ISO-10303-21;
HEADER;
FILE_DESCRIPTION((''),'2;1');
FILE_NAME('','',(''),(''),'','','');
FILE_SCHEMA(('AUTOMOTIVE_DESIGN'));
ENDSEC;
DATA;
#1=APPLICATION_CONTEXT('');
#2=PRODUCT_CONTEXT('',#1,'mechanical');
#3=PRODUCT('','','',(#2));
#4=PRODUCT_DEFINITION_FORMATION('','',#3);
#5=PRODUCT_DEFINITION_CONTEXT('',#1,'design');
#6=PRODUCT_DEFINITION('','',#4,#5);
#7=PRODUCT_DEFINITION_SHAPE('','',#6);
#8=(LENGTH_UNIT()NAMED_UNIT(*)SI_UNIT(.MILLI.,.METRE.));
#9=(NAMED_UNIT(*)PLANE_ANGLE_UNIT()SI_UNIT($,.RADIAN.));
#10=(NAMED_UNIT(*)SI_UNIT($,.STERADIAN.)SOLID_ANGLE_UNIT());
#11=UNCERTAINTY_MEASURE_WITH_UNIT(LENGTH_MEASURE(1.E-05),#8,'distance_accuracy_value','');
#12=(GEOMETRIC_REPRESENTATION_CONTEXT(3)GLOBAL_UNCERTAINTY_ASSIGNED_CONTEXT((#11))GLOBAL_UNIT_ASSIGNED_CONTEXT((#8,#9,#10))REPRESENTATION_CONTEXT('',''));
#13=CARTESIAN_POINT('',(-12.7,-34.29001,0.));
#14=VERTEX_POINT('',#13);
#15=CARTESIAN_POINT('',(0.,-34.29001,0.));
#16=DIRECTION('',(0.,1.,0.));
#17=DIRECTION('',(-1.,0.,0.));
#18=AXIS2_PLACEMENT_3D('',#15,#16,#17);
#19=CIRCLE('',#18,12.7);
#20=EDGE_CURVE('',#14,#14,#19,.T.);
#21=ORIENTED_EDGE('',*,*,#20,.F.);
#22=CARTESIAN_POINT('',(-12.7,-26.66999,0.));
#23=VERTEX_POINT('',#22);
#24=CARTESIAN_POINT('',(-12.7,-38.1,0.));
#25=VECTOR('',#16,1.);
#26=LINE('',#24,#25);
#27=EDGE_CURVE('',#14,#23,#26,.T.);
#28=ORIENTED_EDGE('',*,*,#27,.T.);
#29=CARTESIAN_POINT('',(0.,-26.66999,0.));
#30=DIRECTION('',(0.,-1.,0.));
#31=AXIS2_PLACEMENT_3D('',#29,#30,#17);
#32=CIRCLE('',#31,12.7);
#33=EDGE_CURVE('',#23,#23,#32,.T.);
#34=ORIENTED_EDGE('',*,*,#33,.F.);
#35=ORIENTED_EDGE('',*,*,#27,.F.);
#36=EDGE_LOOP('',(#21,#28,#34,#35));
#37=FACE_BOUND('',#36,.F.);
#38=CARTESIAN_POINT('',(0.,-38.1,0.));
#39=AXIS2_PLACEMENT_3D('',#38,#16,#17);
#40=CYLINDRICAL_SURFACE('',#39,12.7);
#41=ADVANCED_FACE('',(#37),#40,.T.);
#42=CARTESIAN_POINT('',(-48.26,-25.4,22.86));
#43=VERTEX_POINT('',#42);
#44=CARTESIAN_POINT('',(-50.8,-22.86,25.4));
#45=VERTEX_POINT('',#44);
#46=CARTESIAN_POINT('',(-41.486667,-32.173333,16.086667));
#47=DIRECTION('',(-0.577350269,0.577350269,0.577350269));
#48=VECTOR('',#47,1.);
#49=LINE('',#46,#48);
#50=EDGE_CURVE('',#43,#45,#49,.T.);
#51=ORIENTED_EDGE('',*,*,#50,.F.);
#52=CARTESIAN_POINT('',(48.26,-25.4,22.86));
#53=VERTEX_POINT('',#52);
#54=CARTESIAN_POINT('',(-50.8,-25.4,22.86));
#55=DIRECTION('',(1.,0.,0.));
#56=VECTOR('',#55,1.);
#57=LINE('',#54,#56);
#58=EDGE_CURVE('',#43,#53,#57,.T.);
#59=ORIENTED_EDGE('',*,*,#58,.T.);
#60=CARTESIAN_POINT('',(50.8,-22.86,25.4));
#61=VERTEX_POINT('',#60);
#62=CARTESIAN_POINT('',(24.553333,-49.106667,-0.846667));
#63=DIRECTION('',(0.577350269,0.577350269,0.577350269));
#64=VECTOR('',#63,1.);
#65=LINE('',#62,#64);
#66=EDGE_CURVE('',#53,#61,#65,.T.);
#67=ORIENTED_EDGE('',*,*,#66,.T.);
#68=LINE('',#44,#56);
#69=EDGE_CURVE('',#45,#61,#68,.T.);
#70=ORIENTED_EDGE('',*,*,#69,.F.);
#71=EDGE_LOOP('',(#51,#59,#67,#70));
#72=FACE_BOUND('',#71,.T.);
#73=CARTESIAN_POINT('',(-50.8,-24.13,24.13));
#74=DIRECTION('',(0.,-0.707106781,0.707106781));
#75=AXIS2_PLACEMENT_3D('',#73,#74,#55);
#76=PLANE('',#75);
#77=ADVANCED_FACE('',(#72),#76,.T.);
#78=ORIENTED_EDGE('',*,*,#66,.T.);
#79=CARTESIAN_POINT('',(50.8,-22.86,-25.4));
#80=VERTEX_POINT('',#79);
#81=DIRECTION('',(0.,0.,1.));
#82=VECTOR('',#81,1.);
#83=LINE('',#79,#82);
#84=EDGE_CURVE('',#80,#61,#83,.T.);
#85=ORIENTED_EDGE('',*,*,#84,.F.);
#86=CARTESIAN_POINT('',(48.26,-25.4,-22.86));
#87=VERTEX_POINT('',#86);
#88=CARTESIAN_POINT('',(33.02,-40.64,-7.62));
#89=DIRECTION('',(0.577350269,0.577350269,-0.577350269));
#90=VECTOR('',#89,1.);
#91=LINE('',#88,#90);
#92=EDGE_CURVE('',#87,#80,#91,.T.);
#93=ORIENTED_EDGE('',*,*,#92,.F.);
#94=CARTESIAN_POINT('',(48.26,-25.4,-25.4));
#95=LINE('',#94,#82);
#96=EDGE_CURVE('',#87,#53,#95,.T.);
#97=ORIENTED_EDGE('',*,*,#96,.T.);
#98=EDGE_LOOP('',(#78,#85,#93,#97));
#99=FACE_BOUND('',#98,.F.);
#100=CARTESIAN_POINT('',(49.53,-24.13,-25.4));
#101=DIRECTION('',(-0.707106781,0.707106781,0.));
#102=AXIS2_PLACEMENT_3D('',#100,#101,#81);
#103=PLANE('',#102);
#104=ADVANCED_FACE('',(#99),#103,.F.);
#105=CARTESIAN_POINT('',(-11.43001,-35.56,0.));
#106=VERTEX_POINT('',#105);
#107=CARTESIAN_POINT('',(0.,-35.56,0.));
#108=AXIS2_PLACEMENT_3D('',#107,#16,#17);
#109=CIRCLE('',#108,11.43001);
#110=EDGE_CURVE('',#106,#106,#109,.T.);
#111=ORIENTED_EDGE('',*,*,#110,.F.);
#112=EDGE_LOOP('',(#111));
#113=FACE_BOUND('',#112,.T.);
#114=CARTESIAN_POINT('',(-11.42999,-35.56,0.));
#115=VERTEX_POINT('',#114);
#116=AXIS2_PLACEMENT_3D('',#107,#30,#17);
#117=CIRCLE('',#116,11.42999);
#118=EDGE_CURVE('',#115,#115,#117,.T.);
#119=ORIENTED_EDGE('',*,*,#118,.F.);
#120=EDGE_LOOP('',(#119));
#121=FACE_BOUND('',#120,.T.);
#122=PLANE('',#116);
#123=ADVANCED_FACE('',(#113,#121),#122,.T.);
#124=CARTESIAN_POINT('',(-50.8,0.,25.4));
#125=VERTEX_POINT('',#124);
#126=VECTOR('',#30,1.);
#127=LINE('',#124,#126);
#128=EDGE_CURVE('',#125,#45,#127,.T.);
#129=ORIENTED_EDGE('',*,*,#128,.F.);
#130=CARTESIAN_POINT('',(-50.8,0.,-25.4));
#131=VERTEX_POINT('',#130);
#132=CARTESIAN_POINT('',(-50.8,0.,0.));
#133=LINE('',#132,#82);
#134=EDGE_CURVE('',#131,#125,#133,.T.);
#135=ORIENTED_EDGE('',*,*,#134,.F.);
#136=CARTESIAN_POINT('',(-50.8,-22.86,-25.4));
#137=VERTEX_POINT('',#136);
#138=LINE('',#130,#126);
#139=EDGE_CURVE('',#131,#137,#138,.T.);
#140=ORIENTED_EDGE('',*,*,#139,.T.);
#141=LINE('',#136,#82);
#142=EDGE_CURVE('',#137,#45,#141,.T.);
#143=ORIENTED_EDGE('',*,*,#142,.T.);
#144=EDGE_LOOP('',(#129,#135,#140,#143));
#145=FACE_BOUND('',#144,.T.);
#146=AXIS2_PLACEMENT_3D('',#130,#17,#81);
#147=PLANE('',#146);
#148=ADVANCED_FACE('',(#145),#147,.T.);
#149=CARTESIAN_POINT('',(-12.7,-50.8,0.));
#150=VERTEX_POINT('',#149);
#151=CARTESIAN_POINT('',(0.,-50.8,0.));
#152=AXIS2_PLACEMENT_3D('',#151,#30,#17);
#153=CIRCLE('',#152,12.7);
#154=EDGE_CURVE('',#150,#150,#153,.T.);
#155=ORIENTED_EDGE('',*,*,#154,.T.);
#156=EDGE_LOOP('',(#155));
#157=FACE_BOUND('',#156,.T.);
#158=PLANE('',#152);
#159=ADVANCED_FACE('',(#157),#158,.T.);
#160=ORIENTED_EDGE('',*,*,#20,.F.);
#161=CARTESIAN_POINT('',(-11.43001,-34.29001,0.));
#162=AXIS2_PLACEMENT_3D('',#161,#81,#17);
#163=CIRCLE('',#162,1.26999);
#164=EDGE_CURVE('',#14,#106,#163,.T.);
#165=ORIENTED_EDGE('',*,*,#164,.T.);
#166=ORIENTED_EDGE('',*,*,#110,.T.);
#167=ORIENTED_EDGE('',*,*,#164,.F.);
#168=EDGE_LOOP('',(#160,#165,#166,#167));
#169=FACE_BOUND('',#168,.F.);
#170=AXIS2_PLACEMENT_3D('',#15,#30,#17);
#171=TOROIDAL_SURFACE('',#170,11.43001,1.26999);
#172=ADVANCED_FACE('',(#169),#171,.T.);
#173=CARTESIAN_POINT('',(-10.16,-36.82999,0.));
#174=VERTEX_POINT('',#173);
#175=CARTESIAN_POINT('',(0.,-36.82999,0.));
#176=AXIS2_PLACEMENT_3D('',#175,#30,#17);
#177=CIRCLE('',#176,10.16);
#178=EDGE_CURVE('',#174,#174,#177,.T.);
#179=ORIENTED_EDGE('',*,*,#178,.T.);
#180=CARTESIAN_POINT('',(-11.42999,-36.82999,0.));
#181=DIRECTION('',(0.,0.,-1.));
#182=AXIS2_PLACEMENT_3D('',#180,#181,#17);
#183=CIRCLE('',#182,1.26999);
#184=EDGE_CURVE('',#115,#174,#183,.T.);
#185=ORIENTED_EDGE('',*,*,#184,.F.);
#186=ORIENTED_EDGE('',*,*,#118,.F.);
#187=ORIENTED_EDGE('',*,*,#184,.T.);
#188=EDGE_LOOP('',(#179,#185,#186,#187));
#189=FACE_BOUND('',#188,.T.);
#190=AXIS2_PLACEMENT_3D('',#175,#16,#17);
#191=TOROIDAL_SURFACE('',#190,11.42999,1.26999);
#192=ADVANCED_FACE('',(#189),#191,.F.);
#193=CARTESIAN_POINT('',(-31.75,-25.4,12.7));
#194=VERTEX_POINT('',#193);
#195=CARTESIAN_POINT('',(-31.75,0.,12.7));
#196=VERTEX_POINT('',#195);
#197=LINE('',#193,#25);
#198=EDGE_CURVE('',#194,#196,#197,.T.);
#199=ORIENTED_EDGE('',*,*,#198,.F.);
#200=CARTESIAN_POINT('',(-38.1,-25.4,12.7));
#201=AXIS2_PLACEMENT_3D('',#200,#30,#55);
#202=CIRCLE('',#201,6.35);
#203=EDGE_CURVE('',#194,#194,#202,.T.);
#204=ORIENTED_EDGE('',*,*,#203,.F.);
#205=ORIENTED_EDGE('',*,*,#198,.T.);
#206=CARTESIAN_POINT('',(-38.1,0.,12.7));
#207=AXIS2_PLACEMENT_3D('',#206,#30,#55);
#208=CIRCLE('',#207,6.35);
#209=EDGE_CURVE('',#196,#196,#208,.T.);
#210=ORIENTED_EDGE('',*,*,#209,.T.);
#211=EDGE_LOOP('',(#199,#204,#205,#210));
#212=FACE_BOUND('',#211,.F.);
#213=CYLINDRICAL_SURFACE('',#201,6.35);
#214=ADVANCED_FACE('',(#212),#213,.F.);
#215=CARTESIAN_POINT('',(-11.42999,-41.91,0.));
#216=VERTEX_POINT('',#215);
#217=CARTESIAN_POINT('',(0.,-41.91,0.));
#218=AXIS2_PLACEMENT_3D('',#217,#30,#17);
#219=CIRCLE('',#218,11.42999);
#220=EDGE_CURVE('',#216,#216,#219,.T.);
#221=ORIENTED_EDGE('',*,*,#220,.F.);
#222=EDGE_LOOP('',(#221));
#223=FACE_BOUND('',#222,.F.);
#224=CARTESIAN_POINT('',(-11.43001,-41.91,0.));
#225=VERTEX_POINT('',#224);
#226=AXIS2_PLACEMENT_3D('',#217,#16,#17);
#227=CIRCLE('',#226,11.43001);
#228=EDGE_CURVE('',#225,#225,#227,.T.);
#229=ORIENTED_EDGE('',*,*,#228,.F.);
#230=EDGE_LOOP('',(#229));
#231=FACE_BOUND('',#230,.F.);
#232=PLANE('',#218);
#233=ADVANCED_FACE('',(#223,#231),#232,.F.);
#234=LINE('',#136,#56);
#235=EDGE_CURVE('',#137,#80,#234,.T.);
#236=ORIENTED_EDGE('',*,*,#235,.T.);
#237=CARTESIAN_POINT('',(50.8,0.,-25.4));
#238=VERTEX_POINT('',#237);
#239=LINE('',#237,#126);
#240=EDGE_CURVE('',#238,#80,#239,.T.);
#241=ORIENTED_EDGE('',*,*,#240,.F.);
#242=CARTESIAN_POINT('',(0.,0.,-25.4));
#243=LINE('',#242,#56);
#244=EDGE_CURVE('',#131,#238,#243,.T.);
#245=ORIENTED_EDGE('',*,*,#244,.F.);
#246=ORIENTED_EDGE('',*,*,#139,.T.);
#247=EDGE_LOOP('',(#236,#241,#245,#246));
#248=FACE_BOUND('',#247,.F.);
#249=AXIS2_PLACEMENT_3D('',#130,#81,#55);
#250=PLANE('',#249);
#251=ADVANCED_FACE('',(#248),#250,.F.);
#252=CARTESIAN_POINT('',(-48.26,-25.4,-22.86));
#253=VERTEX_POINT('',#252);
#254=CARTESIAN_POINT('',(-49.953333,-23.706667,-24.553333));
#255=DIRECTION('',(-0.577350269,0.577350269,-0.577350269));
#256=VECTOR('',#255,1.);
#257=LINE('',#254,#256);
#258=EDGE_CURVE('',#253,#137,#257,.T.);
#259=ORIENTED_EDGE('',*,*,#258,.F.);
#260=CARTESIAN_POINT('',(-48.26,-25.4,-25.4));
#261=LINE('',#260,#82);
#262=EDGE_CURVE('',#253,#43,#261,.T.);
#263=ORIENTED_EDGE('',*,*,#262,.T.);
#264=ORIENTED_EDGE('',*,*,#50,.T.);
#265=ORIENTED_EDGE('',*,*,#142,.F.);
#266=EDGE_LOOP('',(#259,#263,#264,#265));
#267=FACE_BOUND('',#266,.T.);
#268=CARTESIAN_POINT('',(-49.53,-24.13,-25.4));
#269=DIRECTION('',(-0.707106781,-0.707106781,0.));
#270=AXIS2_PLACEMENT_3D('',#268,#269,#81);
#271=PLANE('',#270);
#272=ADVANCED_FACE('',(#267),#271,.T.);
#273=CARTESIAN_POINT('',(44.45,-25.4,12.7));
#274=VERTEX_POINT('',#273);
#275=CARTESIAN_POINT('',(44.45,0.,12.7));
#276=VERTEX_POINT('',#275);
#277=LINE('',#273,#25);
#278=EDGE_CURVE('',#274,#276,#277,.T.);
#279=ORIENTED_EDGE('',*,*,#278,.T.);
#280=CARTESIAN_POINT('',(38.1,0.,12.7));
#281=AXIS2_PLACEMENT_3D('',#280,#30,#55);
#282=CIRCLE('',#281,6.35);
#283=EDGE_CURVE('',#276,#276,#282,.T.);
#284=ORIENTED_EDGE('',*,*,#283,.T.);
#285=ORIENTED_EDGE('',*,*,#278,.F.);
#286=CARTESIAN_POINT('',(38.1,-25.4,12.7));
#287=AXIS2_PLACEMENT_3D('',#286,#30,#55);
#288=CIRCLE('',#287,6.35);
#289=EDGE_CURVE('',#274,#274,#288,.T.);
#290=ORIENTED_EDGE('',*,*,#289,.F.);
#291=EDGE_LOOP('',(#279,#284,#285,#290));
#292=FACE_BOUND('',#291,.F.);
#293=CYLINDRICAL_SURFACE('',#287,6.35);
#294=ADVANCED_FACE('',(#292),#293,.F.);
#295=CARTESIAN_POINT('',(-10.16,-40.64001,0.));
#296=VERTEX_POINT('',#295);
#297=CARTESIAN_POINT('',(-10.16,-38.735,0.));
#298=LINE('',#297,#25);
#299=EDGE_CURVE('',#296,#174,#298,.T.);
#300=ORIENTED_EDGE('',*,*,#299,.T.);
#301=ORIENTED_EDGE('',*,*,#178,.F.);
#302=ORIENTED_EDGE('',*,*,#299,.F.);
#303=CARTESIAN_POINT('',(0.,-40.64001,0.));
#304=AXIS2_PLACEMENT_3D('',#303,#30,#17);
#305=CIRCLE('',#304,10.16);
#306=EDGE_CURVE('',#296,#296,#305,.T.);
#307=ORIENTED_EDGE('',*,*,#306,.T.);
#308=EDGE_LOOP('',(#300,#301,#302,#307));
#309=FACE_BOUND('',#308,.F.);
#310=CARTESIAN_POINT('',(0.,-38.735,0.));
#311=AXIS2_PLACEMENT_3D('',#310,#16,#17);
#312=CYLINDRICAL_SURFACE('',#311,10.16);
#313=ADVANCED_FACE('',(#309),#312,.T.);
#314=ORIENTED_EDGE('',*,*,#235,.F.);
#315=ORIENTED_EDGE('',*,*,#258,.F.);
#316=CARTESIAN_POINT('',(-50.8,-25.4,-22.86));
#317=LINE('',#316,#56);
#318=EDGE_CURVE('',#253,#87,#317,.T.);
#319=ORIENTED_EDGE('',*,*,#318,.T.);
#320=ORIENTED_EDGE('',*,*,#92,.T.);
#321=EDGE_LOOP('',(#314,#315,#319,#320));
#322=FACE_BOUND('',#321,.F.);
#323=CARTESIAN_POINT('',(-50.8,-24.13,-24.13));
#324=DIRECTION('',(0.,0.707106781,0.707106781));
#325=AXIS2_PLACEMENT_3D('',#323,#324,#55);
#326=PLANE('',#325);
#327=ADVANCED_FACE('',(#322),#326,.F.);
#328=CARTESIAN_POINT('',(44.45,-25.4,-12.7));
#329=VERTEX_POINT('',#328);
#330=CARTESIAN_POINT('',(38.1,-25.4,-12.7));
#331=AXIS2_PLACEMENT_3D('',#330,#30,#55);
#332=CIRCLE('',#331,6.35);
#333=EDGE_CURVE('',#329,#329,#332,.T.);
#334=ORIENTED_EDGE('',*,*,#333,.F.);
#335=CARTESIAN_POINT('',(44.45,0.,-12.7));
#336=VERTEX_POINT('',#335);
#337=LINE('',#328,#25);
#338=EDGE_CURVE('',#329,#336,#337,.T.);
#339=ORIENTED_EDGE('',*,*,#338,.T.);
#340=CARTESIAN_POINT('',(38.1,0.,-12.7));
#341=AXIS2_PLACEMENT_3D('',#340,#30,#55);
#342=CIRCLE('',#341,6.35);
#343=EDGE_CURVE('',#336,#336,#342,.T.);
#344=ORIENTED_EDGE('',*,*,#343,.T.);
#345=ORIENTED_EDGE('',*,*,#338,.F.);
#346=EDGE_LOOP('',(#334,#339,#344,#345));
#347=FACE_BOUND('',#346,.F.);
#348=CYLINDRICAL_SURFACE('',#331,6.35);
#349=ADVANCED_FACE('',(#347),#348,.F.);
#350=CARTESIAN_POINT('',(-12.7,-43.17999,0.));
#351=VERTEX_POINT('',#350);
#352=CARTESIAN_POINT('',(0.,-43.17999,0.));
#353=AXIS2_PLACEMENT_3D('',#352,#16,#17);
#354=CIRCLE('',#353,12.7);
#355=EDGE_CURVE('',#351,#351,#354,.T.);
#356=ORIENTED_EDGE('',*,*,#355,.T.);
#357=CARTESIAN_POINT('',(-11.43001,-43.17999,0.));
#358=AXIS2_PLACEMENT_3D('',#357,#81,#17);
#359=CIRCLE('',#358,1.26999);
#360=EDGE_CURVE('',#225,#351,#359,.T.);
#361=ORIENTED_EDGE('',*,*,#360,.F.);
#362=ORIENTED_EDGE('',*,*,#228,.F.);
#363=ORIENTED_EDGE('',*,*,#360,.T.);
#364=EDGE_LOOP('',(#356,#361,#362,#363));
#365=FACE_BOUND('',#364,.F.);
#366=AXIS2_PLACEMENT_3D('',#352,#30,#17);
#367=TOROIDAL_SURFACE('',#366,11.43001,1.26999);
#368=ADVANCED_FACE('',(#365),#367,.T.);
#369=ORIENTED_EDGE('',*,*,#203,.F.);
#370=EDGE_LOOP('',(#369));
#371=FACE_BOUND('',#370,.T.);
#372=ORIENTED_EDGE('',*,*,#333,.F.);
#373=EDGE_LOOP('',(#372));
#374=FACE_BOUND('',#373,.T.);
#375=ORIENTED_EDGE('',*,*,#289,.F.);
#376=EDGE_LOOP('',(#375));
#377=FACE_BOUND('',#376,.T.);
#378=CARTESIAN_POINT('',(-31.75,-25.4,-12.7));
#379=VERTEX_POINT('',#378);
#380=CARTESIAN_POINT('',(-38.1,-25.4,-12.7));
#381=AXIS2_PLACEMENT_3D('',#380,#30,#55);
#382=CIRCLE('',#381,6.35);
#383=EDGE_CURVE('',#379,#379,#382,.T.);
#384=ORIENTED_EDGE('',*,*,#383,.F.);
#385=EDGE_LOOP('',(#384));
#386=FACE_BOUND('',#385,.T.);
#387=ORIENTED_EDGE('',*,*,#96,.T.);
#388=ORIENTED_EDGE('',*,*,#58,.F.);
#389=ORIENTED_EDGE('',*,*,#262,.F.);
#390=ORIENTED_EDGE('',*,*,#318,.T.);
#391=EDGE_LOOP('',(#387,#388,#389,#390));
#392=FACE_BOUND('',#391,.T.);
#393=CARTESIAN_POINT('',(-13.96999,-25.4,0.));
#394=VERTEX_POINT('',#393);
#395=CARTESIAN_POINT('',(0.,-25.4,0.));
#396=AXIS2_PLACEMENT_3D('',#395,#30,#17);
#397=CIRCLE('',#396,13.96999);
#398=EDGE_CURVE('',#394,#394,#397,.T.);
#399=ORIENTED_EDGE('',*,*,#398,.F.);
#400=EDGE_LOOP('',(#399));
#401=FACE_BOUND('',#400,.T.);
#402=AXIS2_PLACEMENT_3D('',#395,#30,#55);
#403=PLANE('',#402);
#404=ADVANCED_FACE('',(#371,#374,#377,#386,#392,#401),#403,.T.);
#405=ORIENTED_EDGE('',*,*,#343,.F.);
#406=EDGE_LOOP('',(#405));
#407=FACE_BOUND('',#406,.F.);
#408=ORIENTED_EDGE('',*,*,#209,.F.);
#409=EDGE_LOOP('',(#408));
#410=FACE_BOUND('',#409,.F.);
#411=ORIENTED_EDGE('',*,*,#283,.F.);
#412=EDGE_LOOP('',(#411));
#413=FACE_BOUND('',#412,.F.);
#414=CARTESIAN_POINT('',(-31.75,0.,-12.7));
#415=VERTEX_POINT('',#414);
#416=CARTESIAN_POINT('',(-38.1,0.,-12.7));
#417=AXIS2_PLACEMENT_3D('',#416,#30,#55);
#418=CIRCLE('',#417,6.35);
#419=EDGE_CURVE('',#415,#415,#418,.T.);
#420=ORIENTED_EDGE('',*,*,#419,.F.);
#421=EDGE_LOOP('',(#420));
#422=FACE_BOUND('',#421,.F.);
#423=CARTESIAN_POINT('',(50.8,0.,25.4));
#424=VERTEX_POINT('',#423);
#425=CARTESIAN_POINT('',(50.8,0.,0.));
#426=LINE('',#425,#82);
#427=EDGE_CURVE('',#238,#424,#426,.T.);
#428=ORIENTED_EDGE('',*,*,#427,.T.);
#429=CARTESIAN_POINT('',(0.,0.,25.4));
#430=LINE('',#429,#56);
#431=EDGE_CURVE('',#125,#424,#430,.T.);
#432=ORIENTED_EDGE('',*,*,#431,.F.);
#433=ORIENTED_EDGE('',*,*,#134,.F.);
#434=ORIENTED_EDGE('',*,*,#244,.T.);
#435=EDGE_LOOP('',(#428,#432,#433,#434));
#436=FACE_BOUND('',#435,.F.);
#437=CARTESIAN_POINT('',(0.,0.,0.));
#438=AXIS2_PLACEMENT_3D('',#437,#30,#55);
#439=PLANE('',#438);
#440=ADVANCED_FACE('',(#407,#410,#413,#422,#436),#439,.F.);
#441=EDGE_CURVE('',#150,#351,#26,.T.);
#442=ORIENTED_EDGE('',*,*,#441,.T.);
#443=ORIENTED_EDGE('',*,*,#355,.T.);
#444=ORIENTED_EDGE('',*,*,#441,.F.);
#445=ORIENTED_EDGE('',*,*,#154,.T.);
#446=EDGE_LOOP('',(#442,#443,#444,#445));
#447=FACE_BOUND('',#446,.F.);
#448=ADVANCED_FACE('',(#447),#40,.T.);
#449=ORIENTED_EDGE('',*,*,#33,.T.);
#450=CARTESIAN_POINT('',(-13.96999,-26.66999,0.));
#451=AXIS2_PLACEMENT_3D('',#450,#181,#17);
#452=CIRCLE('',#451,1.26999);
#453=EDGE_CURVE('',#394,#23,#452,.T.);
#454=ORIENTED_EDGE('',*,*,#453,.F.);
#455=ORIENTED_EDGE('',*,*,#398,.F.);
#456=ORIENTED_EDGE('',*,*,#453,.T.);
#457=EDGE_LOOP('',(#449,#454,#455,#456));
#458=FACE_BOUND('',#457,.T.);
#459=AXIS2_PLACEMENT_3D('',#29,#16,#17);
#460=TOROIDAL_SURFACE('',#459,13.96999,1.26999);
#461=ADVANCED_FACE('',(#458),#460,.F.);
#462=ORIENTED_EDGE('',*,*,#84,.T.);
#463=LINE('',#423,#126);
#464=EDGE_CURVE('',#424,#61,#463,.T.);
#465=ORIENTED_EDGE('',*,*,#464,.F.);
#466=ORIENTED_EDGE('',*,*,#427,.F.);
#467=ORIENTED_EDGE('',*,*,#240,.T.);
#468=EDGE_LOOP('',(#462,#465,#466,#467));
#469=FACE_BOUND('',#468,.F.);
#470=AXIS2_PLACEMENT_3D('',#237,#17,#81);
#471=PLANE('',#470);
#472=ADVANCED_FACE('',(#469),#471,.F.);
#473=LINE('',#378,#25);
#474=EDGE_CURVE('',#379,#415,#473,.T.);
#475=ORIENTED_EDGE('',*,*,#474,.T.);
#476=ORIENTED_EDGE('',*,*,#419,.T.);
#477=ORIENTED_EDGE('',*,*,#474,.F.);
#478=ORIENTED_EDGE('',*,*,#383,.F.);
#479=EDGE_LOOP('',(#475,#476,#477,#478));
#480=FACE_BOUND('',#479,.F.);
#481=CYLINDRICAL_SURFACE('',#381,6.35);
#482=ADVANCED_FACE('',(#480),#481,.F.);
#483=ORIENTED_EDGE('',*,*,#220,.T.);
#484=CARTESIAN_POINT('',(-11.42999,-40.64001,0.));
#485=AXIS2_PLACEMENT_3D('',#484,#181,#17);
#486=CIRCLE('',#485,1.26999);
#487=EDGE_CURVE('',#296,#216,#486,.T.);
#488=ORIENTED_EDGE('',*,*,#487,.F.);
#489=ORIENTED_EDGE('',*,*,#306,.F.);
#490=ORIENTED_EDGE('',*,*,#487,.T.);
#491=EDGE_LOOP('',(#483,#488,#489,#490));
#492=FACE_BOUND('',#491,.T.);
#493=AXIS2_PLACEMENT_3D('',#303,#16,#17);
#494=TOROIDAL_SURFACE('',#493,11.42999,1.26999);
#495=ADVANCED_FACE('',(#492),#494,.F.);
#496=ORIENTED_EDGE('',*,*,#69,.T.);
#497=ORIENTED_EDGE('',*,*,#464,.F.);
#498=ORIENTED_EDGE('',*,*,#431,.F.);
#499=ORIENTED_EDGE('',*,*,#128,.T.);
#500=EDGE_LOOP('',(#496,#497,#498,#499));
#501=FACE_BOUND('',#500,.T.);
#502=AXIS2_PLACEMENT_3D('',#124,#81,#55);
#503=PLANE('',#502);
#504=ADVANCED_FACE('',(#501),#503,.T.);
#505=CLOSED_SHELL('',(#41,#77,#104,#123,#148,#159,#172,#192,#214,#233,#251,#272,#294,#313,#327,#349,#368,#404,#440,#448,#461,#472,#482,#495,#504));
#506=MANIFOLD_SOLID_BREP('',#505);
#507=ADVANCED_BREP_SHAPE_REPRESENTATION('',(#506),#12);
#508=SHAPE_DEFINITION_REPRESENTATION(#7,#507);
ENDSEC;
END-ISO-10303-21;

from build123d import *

# Parameters (mm, degrees)
F0_W     = 101.6
F0_H     = 50.8
F1_DEPTH = 25.4
F2_R     = 6.35
F3_DEPTH = 25.401
F4_W     = 12.7
F4_H     = 25.4
F6_W     = 6.9762246056
F6_H     = 6.35
F8_R     = 1.26999
F9_SIZE  = 2.54


# Not quite as in the source:
# - a fillet or chamfer is up to 0.001 mm smaller than in the source, because OpenCascade refuses the exact size


with BuildPart() as f1:
    # F0 (on Front) → F1 (new body)
    with BuildSketch(Plane.XZ):
        Rectangle(F0_W, F0_H)
    extrude(amount=F1_DEPTH)

    # F2 (on face) → F3 (cut, through all)
    with BuildSketch(Plane.XZ.offset(25.4)):
        with Locations((-38.1, 12.7)):
            Circle(F2_R)
        with Locations((-38.1, -12.7)):
            Circle(F2_R)
        with Locations((38.1, -12.7)):
            Circle(F2_R)
        with Locations((38.1, 12.7)):
            Circle(F2_R)
    extrude(amount=-F3_DEPTH, mode=Mode.SUBTRACT)

    # F4 (on Top) → F5 (revolve)
    with BuildSketch(Plane.XY):
        with Locations((-6.35, -38.1)):
            Rectangle(F4_W, F4_H)
    revolve(axis=Axis((0, -38.1, 0), (0, -1, 0)))

    # F6 (on Top) → F7 (revolve, cut)
    with BuildSketch(Plane.XY):
        with Locations((-13.6481123028, -38.735)):
            Rectangle(F6_W, F6_H)
    revolve(axis=Axis((0, -32.9395644367, 0), (0, -1, 0)), mode=Mode.SUBTRACT)

    # F8 (radius 1.27 in the source; OpenCascade refuses exactly that, so slightly less here)
    f8_edges = [f1.edges().sort_by_distance(p)[0] for p in [
        (12.7, -25.4, 0),
        (10.16, -41.91, 0),
        (10.16, -35.56, 0),
        (12.7, -41.91, 0),
        (12.7, -35.56, 0),
    ]]
    fillet(f8_edges, radius=F8_R)

    # F9
    f9_edges = [f1.edges().sort_by_distance(p)[0] for p in [
        (0, -25.4, -25.4),
        (-50.8, -25.4, 0),
        (0, -25.4, 25.4),
        (50.8, -25.4, 0),
    ]]
    chamfer(f9_edges, length=F9_SIZE)


solid = f1.part
